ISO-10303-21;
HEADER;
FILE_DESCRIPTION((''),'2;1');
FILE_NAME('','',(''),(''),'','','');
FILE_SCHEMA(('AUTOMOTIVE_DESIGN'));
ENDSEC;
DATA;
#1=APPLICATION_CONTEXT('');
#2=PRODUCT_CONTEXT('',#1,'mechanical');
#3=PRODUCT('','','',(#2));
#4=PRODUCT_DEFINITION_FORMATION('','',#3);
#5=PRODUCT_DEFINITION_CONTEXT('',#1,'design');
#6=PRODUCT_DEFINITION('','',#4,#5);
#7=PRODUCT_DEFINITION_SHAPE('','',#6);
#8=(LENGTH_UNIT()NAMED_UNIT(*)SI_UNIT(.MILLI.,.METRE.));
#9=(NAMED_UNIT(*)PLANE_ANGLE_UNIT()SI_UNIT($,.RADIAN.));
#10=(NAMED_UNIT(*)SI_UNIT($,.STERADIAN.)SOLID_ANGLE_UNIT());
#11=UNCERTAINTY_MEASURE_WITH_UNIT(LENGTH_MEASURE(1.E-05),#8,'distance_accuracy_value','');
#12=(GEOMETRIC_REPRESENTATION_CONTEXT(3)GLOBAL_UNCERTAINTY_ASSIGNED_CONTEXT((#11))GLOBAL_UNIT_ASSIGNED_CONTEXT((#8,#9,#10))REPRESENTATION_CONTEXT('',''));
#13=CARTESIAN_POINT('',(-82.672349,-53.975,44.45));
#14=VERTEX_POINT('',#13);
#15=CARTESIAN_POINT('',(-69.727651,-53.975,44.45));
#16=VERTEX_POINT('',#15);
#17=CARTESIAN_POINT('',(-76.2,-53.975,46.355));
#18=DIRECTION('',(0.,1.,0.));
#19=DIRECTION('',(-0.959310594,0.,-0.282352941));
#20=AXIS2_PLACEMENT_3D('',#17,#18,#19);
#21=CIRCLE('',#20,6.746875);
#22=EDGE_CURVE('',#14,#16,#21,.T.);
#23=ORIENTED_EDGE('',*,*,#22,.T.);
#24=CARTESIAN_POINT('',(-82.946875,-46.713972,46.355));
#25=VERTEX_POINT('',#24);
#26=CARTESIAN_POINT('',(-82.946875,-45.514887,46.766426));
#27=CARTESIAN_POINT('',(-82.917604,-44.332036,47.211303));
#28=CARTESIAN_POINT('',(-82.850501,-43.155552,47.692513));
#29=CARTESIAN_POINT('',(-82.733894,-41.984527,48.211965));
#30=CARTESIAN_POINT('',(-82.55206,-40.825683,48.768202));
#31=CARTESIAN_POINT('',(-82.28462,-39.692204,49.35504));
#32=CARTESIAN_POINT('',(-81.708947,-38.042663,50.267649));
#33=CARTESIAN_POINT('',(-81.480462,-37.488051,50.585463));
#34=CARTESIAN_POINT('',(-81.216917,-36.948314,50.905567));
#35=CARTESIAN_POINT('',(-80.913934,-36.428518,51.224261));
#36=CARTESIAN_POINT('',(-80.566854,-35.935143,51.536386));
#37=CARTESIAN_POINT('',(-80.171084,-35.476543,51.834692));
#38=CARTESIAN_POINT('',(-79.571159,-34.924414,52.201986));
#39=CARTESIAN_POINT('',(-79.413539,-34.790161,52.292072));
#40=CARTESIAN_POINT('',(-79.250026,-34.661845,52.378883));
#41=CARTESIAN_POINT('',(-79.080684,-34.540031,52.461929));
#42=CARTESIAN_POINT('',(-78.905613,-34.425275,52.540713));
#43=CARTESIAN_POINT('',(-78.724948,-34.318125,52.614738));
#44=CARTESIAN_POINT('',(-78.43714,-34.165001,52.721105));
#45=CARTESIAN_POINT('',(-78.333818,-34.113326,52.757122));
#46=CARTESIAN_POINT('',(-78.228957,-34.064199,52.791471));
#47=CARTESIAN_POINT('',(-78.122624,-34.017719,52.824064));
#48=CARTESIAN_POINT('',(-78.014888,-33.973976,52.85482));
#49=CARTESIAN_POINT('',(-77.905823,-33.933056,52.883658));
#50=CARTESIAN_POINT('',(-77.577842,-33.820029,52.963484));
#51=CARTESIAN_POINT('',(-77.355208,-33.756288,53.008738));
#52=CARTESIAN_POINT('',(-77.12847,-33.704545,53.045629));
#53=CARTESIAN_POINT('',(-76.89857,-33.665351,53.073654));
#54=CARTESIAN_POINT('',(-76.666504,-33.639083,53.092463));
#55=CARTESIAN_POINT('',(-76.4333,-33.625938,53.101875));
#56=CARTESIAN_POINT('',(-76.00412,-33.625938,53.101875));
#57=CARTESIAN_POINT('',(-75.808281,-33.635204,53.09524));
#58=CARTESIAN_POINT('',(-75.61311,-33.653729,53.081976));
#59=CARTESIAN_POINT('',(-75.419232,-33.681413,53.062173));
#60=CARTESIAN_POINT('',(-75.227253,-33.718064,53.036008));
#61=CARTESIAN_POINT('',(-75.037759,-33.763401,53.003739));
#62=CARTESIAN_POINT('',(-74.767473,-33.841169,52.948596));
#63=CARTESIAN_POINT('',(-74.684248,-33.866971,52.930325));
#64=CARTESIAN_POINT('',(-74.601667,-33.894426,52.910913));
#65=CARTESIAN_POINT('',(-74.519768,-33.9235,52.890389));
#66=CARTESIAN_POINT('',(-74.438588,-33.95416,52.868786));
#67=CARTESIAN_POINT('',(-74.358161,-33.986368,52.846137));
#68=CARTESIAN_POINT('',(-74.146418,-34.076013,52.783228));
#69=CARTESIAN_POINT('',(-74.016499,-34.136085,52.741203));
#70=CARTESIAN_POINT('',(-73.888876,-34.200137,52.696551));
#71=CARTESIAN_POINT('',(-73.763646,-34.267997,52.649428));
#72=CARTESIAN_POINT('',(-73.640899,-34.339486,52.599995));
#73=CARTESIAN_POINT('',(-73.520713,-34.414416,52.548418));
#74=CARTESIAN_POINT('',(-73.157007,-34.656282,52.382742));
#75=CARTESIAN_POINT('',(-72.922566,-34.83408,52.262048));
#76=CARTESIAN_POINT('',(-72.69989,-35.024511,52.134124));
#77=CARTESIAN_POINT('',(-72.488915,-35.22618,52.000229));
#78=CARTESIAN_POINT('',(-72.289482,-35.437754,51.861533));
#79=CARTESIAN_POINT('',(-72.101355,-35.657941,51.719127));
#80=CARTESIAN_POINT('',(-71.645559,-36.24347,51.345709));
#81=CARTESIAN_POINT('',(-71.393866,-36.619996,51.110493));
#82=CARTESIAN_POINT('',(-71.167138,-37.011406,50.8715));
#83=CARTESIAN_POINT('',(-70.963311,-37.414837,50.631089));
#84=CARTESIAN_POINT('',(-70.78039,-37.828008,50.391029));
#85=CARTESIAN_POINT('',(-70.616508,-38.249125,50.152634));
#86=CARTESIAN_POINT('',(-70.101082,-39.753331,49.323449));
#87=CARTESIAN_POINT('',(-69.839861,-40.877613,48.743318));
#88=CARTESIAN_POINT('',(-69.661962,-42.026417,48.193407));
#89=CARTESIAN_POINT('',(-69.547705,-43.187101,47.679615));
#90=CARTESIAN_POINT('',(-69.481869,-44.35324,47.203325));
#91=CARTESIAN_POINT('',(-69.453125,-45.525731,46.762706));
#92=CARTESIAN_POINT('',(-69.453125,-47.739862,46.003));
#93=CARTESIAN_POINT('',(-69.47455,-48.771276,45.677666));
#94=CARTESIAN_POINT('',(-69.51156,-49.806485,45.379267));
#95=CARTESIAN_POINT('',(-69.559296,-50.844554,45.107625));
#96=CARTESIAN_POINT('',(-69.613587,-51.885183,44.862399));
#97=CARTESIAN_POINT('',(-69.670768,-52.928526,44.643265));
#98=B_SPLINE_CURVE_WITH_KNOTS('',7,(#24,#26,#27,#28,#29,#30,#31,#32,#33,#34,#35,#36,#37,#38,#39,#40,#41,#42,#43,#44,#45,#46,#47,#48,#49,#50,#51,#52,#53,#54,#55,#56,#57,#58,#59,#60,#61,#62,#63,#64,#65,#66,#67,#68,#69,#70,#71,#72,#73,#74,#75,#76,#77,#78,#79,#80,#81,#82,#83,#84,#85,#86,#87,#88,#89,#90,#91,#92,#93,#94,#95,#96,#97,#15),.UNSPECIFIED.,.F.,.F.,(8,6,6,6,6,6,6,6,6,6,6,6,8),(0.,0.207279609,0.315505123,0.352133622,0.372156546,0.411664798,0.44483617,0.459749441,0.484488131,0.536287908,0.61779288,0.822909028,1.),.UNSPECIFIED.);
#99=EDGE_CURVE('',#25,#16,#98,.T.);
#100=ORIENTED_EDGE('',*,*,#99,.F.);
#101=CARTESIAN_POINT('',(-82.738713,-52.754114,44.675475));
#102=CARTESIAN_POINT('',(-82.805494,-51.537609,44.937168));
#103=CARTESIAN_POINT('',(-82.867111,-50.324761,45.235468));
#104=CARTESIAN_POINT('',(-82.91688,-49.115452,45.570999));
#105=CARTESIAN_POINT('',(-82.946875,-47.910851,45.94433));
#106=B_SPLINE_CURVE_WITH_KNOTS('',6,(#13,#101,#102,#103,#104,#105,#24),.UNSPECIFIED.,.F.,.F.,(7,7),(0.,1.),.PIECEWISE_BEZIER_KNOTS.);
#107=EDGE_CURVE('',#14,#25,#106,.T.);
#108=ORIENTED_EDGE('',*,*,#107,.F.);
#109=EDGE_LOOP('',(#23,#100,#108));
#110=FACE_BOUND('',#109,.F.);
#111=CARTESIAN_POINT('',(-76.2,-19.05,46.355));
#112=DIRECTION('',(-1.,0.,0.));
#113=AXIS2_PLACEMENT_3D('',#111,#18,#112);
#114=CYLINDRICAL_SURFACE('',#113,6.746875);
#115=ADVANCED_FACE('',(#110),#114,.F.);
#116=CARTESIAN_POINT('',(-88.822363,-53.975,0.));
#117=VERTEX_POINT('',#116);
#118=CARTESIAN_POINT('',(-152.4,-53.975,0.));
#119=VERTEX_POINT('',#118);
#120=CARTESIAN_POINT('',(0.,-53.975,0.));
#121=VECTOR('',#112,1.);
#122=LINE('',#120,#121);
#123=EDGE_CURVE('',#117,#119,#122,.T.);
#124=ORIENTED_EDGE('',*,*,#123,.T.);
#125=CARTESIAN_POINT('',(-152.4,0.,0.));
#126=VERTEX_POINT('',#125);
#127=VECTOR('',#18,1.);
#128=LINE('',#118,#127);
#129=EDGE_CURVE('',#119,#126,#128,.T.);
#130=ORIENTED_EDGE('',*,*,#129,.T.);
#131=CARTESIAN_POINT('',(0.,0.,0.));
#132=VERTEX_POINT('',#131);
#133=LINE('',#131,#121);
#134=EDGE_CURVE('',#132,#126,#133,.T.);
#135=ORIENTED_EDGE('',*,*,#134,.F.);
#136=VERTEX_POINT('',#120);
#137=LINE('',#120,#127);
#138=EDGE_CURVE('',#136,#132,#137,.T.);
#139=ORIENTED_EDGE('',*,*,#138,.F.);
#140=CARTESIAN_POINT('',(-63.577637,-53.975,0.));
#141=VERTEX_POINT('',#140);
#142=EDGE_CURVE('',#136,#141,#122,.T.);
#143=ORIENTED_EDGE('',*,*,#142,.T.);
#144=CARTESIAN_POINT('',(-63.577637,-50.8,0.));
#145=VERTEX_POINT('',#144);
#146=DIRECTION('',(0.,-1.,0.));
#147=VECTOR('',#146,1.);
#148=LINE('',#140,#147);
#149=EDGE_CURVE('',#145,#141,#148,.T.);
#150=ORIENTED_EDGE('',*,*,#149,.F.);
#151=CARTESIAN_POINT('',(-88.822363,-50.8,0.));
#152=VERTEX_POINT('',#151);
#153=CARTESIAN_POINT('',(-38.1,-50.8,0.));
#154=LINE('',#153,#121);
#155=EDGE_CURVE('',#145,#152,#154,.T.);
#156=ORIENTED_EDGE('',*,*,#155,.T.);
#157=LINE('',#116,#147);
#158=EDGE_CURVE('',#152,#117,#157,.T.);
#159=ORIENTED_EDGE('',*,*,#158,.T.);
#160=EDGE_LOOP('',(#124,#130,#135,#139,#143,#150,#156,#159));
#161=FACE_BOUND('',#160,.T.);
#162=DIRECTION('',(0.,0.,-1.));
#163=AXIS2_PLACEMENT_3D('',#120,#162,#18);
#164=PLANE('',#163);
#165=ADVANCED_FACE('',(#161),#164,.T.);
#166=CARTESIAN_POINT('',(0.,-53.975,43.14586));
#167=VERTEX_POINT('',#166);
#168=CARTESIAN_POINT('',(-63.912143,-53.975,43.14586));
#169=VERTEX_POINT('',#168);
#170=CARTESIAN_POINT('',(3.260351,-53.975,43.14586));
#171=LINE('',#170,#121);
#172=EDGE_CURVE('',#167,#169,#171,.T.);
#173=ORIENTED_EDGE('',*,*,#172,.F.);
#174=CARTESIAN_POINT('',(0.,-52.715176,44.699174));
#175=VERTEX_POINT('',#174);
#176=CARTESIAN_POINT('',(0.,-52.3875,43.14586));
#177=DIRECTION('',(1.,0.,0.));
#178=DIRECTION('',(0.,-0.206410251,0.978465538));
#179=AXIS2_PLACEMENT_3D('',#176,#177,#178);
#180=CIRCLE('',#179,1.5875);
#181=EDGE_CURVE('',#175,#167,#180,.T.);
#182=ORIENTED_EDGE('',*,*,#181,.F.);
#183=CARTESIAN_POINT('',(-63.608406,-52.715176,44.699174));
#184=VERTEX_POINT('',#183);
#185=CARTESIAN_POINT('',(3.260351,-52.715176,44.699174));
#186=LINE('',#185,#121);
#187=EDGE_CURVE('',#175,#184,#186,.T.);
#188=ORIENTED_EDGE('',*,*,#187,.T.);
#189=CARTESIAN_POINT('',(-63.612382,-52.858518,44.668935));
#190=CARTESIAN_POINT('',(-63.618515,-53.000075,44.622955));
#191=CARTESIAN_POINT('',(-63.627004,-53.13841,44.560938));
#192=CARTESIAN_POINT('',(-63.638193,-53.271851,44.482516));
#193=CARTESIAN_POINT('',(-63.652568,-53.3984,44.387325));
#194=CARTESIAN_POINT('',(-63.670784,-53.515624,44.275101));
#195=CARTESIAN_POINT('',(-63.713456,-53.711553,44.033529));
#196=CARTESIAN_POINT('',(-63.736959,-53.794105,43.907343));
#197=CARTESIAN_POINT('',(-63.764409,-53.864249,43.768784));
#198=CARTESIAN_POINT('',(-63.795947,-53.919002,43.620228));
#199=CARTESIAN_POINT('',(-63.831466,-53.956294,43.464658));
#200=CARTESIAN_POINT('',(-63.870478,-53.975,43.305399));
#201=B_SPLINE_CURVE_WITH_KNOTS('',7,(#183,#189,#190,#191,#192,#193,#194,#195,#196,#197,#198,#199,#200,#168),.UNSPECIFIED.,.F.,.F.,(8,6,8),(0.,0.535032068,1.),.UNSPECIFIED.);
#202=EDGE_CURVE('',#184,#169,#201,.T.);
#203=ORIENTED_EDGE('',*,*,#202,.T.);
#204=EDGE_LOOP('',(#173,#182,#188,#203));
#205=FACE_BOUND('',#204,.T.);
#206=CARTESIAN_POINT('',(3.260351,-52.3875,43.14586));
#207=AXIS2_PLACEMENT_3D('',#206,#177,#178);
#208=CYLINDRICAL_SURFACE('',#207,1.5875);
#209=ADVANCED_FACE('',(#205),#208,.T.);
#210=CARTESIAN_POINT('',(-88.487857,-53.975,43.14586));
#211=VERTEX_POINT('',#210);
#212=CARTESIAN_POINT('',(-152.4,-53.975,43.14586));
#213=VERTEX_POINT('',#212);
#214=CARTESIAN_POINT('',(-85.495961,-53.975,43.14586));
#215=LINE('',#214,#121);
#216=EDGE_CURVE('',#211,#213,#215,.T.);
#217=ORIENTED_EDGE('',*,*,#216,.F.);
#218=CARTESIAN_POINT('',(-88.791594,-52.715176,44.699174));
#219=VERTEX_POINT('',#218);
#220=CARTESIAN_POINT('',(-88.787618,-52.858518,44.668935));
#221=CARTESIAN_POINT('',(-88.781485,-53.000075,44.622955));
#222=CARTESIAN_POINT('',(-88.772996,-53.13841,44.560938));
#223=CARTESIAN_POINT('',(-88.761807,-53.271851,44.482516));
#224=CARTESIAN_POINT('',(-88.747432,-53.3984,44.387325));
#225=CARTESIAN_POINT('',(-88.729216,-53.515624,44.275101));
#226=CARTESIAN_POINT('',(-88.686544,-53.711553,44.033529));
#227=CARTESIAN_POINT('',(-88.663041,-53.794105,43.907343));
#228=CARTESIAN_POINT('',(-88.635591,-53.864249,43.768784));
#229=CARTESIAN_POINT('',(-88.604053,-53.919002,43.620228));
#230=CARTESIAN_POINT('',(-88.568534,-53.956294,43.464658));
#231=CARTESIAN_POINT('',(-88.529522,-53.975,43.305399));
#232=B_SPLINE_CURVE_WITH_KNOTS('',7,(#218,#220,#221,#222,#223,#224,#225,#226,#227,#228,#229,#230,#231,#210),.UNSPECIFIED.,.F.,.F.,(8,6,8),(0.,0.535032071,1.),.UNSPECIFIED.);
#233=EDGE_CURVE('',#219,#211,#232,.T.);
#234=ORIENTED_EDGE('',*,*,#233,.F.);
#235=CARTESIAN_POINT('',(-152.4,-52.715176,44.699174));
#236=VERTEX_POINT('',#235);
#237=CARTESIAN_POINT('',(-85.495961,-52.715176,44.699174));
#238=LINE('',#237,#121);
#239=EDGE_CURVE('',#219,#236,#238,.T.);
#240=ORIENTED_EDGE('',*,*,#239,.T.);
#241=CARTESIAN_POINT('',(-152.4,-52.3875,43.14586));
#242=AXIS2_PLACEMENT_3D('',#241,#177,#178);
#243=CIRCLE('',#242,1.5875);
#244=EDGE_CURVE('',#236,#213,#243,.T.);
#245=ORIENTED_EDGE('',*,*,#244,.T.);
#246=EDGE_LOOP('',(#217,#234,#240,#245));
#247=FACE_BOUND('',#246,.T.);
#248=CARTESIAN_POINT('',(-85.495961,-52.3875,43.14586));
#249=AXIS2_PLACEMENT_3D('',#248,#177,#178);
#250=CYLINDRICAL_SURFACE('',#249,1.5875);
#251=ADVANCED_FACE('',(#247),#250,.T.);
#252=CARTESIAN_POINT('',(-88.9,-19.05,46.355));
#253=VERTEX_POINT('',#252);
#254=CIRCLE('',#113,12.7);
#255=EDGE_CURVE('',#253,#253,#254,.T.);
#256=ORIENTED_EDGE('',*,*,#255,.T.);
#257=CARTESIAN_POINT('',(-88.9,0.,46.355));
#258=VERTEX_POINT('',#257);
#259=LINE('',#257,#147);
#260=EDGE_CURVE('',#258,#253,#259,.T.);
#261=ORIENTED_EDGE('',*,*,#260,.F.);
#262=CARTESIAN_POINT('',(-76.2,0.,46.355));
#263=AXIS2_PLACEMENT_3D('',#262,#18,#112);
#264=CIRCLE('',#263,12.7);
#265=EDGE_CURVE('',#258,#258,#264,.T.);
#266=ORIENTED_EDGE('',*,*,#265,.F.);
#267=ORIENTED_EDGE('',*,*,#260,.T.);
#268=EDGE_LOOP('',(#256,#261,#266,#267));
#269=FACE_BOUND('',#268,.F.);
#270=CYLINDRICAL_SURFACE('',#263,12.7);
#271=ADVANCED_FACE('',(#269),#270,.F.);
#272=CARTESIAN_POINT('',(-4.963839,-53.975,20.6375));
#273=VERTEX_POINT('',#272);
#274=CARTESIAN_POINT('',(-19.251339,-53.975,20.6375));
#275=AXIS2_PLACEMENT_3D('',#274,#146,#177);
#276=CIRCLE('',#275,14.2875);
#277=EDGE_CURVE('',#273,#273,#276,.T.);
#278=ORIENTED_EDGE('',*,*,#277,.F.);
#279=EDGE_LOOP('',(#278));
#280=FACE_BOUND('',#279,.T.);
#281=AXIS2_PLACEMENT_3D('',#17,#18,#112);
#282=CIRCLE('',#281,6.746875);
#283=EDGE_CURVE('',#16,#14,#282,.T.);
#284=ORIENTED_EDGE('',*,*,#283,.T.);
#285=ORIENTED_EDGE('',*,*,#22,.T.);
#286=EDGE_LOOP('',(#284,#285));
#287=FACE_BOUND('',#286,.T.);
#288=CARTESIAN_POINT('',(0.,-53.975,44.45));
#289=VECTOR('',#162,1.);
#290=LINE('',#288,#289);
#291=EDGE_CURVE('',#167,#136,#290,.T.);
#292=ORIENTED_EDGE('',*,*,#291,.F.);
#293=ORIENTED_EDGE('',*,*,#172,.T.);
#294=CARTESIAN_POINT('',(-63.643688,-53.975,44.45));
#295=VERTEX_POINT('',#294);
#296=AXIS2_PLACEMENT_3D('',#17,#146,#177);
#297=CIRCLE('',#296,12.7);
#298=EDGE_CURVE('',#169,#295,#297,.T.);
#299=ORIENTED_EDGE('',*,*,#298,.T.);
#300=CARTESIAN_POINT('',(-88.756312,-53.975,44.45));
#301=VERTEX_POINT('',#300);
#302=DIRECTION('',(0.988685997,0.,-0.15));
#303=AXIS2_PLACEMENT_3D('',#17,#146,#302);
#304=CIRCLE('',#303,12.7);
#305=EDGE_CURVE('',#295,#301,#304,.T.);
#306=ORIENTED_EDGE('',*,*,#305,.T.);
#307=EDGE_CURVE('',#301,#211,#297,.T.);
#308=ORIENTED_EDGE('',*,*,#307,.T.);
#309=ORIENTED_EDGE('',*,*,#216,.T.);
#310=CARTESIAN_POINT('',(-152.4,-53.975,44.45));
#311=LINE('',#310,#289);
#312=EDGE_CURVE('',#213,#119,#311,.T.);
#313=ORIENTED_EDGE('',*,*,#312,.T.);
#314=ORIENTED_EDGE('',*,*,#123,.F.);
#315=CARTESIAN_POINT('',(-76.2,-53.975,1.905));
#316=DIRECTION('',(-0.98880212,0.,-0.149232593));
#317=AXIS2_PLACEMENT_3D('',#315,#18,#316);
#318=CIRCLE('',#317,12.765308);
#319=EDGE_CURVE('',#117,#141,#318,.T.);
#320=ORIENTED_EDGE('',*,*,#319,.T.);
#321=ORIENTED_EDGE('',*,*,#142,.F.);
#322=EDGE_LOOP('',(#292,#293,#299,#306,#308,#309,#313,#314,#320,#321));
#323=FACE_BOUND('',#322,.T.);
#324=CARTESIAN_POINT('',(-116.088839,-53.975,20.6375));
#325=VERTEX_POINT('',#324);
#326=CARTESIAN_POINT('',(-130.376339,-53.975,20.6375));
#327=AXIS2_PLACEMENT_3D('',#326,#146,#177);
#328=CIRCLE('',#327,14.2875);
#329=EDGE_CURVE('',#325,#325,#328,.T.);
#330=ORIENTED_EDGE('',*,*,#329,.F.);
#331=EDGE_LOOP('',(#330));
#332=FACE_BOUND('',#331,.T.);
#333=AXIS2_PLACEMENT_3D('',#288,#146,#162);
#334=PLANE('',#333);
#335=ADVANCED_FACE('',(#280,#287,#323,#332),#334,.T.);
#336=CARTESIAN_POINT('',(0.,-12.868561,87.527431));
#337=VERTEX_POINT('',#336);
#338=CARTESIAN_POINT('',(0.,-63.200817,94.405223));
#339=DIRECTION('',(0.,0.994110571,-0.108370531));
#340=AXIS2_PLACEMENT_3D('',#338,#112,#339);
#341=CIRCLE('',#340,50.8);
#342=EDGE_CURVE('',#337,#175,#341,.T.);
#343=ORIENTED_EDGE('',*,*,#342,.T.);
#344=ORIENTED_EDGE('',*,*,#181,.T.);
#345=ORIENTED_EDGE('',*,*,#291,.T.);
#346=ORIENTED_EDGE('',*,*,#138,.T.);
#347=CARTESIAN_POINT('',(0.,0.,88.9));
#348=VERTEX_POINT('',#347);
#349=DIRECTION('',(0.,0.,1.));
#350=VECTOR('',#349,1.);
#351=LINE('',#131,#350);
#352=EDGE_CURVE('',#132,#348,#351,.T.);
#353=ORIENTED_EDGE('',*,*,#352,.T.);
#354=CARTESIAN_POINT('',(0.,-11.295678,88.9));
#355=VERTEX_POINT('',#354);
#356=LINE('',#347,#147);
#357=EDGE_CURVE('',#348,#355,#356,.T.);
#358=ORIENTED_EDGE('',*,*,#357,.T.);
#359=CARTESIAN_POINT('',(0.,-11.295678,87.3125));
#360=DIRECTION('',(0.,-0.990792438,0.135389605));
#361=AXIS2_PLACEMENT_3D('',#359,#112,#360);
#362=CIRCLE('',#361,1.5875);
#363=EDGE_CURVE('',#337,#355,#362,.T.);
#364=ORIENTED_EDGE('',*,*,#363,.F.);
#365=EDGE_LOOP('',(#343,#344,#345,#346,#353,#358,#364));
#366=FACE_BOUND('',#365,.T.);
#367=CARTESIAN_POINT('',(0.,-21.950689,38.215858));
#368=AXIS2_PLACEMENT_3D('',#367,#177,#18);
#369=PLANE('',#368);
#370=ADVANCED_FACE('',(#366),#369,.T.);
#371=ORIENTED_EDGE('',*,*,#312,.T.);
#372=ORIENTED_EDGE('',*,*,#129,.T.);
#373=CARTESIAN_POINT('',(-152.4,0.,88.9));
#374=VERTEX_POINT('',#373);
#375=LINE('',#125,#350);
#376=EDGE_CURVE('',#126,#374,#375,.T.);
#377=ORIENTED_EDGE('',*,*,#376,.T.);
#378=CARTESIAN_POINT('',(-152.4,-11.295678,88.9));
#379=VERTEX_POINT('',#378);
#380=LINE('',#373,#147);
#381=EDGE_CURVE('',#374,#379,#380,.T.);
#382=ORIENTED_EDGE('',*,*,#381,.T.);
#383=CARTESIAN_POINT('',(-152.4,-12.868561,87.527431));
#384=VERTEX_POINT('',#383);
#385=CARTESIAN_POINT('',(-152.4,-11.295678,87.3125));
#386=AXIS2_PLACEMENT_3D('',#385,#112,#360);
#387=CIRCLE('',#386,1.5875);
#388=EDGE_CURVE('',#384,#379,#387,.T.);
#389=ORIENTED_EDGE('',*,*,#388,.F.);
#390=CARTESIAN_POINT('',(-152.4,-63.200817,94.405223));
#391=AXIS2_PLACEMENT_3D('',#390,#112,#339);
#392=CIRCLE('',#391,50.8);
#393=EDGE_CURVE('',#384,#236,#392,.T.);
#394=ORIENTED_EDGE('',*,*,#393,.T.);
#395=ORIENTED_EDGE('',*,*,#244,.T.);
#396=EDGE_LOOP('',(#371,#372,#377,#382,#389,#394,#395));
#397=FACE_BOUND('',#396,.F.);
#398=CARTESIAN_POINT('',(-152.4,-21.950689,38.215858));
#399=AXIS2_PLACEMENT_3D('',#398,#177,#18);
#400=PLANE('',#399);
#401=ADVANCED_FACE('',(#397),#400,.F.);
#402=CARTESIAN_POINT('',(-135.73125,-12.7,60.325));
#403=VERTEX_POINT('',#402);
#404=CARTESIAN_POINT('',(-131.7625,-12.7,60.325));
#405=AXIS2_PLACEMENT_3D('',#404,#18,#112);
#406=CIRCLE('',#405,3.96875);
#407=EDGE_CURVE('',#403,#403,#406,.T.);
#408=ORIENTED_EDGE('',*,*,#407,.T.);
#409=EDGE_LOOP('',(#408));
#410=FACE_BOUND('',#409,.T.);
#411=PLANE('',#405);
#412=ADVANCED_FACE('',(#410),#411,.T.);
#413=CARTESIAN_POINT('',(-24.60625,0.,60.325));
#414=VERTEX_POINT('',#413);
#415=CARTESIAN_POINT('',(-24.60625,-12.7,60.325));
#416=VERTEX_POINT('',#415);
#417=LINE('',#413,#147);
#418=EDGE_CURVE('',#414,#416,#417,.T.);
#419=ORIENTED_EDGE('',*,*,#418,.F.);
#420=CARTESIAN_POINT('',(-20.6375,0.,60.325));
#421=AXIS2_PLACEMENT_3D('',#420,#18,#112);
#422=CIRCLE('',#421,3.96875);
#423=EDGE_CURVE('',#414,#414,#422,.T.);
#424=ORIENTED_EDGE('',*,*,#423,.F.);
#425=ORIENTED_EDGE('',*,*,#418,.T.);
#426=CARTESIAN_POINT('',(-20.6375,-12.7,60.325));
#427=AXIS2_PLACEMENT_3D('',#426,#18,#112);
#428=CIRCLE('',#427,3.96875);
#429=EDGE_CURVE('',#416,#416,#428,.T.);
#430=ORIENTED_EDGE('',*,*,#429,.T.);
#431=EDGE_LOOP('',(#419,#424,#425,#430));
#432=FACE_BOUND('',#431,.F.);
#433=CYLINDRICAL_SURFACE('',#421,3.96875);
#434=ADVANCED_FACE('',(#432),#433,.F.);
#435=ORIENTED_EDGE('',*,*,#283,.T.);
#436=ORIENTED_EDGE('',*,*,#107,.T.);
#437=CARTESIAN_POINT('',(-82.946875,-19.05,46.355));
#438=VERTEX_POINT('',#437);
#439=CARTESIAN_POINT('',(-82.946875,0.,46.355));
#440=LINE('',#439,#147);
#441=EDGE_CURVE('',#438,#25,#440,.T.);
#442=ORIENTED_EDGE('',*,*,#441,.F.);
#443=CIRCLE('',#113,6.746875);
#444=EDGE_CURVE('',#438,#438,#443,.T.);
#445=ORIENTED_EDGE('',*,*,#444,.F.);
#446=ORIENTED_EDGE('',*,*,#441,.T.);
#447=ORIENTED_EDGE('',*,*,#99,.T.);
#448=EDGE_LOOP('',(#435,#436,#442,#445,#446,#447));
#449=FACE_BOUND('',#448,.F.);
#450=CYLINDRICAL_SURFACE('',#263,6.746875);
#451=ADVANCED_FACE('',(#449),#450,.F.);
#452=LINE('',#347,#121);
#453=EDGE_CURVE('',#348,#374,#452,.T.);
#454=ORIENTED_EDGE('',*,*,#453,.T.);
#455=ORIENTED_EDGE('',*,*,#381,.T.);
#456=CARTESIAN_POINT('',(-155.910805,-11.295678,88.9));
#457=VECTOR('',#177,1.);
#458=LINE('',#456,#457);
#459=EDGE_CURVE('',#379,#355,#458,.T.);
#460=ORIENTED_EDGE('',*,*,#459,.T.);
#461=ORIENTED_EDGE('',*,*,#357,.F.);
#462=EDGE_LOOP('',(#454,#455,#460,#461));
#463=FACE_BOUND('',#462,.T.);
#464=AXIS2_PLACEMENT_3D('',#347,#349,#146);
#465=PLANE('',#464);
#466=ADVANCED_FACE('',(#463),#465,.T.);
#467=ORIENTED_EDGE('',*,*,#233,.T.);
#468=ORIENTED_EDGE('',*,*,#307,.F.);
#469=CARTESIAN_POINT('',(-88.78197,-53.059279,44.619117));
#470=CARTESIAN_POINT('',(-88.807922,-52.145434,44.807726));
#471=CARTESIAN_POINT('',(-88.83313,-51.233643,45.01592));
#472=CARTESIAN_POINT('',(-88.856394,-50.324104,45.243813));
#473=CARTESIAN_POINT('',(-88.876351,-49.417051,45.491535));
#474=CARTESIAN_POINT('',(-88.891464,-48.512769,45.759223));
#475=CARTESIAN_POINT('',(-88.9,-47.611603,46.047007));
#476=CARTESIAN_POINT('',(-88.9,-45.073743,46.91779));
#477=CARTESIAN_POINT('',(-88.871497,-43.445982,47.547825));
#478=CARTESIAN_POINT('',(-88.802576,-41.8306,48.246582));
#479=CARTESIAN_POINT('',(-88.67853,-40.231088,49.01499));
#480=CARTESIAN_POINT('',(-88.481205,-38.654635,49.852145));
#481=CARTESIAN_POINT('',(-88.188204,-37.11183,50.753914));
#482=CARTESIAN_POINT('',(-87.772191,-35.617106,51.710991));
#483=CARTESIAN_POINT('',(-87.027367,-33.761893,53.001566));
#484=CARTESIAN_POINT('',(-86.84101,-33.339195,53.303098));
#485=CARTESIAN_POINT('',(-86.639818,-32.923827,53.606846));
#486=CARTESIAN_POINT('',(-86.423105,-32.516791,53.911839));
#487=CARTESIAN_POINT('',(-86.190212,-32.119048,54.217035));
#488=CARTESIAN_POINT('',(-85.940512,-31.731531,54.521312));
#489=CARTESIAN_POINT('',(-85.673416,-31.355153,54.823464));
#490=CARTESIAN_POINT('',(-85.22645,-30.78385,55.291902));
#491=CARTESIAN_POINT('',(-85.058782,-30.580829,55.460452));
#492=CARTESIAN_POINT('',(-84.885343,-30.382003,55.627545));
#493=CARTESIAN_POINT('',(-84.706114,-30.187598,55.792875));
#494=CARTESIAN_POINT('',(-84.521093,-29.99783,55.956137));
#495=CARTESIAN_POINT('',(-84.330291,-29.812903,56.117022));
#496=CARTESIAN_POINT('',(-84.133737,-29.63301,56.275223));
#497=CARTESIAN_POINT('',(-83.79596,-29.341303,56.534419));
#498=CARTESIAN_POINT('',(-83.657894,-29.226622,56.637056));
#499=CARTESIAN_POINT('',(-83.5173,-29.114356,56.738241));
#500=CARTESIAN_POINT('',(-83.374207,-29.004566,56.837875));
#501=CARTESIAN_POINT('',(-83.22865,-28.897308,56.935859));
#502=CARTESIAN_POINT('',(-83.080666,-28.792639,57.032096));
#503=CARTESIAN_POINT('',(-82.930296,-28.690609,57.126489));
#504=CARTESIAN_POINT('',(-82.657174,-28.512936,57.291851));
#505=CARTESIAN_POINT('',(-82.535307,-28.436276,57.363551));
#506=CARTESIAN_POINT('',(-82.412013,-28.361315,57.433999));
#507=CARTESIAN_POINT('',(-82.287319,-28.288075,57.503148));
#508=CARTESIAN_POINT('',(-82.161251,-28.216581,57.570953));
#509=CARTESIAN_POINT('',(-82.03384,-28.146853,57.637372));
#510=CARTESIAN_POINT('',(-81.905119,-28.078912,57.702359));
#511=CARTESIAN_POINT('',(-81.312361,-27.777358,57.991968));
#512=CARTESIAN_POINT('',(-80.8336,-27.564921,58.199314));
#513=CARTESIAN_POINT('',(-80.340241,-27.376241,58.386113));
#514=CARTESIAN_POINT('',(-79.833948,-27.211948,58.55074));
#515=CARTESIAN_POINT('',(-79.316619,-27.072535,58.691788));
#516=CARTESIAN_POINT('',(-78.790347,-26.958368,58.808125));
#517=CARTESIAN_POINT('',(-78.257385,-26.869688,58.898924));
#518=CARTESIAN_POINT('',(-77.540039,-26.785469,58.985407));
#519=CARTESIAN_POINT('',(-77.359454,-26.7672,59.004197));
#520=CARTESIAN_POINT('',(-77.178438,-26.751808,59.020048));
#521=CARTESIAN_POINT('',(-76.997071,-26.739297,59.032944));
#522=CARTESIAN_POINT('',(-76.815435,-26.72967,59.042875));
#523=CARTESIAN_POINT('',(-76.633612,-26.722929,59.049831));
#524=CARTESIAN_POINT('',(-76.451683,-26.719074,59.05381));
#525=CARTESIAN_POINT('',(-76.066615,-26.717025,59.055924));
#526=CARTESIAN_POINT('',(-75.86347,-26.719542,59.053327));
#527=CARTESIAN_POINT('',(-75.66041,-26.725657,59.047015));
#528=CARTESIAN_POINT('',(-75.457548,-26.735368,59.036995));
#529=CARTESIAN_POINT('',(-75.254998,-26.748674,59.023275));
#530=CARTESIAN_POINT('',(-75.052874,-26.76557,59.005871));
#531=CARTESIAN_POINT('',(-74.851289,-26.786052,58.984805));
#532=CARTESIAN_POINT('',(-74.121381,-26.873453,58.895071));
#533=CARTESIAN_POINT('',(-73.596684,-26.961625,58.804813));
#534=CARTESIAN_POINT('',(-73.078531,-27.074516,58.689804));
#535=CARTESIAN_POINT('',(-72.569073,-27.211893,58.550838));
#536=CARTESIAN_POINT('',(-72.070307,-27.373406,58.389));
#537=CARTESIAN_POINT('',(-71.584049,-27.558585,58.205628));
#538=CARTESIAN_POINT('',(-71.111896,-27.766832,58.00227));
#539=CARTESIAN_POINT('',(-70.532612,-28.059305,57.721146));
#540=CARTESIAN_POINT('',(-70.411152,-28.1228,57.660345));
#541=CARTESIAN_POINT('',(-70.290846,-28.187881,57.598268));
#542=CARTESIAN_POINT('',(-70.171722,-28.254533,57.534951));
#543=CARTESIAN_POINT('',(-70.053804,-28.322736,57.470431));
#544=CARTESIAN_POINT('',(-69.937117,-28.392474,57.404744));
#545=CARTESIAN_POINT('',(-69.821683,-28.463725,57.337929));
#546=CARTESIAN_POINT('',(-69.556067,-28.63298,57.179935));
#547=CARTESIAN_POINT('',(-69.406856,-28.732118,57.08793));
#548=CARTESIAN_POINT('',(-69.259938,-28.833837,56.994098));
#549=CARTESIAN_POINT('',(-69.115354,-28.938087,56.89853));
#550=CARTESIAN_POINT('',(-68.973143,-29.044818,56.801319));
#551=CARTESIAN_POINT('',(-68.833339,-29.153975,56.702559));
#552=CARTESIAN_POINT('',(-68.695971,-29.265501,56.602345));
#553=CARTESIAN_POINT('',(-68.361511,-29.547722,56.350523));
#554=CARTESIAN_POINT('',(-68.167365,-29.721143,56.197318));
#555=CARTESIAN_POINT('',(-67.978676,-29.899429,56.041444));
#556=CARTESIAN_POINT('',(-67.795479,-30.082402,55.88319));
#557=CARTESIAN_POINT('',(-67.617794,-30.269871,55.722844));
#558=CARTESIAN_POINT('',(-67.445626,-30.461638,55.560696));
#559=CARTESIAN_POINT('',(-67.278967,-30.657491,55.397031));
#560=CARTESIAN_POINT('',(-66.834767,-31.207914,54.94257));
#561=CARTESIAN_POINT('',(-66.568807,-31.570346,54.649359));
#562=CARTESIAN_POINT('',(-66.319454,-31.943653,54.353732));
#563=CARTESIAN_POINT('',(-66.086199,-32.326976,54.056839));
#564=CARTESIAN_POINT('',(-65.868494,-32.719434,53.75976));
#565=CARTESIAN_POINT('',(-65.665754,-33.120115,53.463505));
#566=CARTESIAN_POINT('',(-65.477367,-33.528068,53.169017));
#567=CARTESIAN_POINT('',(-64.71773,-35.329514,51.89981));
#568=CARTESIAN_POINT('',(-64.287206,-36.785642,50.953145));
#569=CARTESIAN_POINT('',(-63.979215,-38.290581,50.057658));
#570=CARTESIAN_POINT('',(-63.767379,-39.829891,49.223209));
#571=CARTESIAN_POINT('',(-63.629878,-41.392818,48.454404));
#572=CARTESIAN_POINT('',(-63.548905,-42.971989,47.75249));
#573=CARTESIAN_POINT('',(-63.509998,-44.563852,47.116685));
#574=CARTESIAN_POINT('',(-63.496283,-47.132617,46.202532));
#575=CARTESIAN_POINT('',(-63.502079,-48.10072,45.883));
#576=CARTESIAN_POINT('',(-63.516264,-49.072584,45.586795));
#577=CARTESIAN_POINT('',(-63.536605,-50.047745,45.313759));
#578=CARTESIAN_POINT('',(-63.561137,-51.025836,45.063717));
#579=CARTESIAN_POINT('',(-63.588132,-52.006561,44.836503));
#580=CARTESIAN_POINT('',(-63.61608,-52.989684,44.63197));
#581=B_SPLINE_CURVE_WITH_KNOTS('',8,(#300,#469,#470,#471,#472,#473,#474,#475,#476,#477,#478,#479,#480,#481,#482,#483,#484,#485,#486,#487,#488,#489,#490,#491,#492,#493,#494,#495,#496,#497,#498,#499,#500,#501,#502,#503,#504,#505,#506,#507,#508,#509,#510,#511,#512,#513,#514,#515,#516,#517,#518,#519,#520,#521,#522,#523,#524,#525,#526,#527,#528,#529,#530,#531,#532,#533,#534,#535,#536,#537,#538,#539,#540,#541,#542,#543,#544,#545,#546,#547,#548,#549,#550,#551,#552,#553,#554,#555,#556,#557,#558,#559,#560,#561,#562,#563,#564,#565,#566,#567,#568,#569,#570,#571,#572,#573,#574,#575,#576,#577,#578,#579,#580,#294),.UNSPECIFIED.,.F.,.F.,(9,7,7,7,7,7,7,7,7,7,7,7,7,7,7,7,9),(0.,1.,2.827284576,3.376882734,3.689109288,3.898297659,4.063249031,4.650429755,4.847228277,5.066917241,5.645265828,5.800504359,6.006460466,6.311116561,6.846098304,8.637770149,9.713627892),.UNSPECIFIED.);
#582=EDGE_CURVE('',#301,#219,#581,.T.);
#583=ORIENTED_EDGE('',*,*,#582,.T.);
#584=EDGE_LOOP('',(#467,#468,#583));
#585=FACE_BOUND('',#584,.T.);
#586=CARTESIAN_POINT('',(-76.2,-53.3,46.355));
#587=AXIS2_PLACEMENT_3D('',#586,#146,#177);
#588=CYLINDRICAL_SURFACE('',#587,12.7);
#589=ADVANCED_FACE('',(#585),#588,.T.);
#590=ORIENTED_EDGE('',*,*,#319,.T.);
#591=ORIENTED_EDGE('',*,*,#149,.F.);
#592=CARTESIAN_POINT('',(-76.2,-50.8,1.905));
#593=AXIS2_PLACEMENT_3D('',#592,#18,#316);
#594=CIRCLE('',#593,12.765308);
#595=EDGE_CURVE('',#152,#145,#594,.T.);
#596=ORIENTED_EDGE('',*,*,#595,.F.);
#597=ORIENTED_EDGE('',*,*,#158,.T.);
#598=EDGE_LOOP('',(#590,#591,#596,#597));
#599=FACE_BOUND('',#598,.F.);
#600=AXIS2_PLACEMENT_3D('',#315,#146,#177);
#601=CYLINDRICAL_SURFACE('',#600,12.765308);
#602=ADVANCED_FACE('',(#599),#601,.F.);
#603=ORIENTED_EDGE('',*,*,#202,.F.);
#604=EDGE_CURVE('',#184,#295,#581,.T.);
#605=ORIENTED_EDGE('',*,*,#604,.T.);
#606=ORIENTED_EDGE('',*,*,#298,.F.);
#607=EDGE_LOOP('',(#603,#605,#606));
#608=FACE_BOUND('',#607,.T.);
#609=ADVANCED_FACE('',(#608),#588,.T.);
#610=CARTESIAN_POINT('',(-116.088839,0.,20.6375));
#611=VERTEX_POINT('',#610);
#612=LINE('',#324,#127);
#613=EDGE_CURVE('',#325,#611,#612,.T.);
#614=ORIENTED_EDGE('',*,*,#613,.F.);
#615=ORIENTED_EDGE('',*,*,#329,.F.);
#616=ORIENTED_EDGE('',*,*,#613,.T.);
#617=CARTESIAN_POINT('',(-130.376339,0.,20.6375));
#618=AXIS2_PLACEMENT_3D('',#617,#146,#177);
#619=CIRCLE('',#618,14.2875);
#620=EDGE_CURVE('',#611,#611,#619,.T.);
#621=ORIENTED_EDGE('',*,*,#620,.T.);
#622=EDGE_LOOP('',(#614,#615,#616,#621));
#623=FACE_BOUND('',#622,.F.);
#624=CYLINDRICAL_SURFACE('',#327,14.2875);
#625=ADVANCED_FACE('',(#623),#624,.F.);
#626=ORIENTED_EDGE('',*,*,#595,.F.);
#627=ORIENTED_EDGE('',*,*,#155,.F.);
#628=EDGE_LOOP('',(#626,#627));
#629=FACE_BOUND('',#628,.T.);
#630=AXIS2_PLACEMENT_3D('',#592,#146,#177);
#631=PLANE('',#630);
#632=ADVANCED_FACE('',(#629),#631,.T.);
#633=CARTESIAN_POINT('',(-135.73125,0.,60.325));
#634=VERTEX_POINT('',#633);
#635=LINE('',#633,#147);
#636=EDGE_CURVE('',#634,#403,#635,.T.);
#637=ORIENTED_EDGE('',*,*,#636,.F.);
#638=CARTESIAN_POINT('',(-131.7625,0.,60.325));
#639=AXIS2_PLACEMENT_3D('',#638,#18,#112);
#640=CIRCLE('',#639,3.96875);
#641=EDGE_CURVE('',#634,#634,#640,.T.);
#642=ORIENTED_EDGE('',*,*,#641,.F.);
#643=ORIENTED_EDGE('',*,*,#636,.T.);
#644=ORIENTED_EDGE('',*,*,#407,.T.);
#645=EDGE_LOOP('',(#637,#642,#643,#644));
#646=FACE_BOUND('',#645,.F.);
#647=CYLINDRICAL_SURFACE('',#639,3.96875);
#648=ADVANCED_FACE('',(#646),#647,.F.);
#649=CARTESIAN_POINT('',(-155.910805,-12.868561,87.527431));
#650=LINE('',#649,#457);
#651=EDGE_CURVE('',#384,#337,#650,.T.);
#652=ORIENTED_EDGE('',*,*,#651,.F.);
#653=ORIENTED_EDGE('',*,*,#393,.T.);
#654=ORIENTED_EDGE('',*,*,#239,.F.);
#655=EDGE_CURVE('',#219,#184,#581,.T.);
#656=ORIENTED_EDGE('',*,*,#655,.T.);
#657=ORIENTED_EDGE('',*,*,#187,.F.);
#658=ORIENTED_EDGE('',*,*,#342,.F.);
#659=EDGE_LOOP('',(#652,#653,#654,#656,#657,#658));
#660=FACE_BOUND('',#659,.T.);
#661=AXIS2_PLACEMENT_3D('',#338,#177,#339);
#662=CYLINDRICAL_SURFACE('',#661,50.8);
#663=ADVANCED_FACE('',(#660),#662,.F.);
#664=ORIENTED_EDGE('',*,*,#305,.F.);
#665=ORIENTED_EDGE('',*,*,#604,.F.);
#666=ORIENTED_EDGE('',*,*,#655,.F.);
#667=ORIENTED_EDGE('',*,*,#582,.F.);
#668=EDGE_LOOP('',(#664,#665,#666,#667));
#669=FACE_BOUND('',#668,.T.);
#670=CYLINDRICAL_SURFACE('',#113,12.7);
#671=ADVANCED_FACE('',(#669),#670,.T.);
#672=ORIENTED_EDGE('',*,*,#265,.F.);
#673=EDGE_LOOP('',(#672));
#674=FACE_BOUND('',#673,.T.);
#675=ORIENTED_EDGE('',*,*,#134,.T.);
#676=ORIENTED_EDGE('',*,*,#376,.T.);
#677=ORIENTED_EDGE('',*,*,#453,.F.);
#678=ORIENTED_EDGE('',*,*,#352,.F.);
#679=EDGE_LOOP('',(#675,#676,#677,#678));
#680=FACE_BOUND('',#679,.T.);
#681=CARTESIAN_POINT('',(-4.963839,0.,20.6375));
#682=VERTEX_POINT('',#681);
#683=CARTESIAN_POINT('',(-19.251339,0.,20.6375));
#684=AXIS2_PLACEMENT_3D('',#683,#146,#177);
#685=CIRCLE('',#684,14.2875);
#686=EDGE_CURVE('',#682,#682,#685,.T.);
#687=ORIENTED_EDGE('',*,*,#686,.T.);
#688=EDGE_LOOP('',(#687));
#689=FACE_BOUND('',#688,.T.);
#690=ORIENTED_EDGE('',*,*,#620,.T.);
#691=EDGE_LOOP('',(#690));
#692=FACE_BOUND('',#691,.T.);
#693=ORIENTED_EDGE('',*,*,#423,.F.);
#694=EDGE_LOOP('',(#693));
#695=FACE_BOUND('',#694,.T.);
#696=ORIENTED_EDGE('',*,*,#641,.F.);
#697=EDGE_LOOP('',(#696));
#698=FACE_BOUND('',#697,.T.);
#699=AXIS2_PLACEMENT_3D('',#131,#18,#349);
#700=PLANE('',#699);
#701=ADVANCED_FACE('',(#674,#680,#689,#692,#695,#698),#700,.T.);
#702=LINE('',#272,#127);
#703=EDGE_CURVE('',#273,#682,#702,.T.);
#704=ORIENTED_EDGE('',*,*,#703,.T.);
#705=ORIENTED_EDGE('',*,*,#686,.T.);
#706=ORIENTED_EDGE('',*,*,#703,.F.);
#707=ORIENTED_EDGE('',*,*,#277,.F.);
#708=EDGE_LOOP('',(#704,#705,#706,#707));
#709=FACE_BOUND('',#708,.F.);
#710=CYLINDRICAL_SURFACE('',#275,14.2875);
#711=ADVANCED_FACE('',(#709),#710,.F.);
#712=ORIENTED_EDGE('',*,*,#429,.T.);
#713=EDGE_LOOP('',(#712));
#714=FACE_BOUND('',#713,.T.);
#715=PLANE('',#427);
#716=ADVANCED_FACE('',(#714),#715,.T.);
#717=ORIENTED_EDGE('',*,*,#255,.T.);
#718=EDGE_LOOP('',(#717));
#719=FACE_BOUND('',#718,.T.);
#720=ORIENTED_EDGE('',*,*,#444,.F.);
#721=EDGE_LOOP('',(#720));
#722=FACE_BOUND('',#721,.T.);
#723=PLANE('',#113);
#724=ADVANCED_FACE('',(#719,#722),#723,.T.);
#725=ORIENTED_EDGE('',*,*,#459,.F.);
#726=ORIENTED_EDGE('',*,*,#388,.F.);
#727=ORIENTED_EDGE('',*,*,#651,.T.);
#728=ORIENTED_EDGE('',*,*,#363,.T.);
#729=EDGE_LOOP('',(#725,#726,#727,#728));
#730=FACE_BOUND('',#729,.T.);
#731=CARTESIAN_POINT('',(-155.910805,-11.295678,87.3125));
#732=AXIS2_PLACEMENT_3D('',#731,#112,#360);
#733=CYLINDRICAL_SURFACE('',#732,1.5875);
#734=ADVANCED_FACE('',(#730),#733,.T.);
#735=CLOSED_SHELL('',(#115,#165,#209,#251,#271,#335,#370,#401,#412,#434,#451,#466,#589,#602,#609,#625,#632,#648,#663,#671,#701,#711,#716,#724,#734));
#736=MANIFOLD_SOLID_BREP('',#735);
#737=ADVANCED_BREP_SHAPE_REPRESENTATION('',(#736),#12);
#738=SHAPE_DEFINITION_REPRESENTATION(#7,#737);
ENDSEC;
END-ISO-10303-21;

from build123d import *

# Parameters (mm, degrees)
F1_DEPTH      = 152.4
F2_R          = 14.2875
F3_DEPTH      = 101.6
F4_R          = 12.7
F4_R_2        = 6.746875
F5_DEPTH      = 19.05
F6_DEPTH      = 76.2
F7_DEPTH      = 34.925
F8_R          = 12.7653078778
F9_DEPTH      = 3.175
F10_T1_DEPTH  = 159.4216090421
F10_T6_DEPTH  = 70.1643898363
F10_S7_R      = 12.7
F10_T8_DEPTH  = 37
F10_T12_DEPTH = 70.1643898363
F10_S13_R     = 12.7
F10_T14_DEPTH = 37
F11_R         = 3.96875
F12_DEPTH     = 12.7


# Not quite as in the source:
# - a fillet or chamfer that OpenCascade refuses, or shapes differently, is made with other operations: its cross-section is extruded or revolved along the edge and cut away or added
# - a length typed as a fraction of an inch, garbled in the dataset ("3 / 203.2 mm" for 3/8 in), is restored


with BuildPart() as f1:
    # F0 (on Right) → F1 (new body)
    with BuildSketch(Plane.YZ):
        with BuildLine():
            Line((-53.975, 44.45), (-53.975, 0))
            Line((-53.975, 0), (0, 0))
            Line((0, 0), (0, 88.9))
            Line((0, 88.9), (-12.7, 88.9))
            ThreePointArc((-12.7, 88.9), (-25.9749076509, 59.8383071044), (-53.975, 44.45))
        make_face()
    extrude(amount=-F1_DEPTH)

    # F2 (on face) → F3 (cut)
    with BuildSketch(Plane.XZ.offset(53.975)):
        with Locations((-130.3763389587, 20.6375)):
            Circle(F2_R)
        with Locations((-19.2513389587, 20.6375)):
            Circle(F2_R)
    extrude(amount=-F3_DEPTH, mode=Mode.SUBTRACT)

    # F4 (on face) → F5 (cut)
    with BuildSketch(Plane(origin=(0, 0, 0), x_dir=(-1, 0, 0), z_dir=(0, 1, 0))):
        with Locations((76.2, 46.355)):
            Circle(F4_R)
        with Locations((76.2, 46.355)):
            Circle(F4_R_2, mode=Mode.SUBTRACT)
    extrude(amount=-F5_DEPTH, mode=Mode.SUBTRACT)

    # F6 (cut): a face of the model
    f6_faces = [f1.faces().sort_by_distance(p)[0] for p in [
        (-76.2, 0, 46.355),
    ]]
    extrude(f6_faces, amount=-F6_DEPTH, mode=Mode.SUBTRACT)

    # F7 (add, through all): a face of the model
    f7_faces = [f1.faces().sort_by_distance(p)[0] for p in [
        (-63.8592102448, -19.05, 46.355),
    ]]
    extrude(f7_faces, amount=-F7_DEPTH)

    # F8 (on face) → F9 (cut)
    with BuildSketch(Plane.XZ.offset(53.975)):
        with Locations((-76.2, 1.905)):
            Circle(F8_R)
    extrude(amount=-F9_DEPTH, mode=Mode.SUBTRACT)

    # F10: fillet of radius 1.5875 on 3 edges, made by hand

    # F10_s2 → F10_t1 (cut)
    with BuildSketch(Plane.YZ.offset(-155.9108045211)):
        with BuildLine():
            ThreePointArc((-12.8685611865, 87.5274309986), (-12.3394581707, 88.5086101977), (-11.2956781916, 88.9))
            Line((-11.2956781916, 88.9), (-12.7, 88.9))
            ThreePointArc((-12.7, 88.9), (-12.7796098579, 88.2131418999), (-12.8685611865, 87.5274309986))
        make_face()
    extrude(amount=F10_T1_DEPTH, mode=Mode.SUBTRACT)


with BuildPart() as f10_tool4:
    # F10_s5 → F10_t6 (new body)
    with BuildSketch(Plane.YZ.offset(-85.4959611607)):
        with BuildLine():
            ThreePointArc((-52.7151762735, 44.6991736422), (-53.6204522161, 44.1458521426), (-53.975, 43.1458596012))
            Line((-53.975, 43.1458596012), (-53.975, 44.45))
            ThreePointArc((-53.975, 44.45), (-53.3443007137, 44.5706056045), (-52.7151762735, 44.6991736422))
        make_face()
    extrude(amount=-F10_T6_DEPTH)

    # F10_s7 → F10_t8 (cut, symmetric)
    with BuildSketch(Plane.XZ.offset(53.3)):
        with Locations((-76.2, 46.355)):
            Circle(F10_S7_R)
    extrude(amount=F10_T8_DEPTH, both=True, mode=Mode.SUBTRACT)


with BuildPart() as f1_1:
    add(f1.part)

    # F10_t3: cut F10_tool4
    add(f10_tool4.part, mode=Mode.SUBTRACT)


with BuildPart() as f10_tool10:
    # F10_s11 → F10_t12 (new body)
    with BuildSketch(Plane.YZ.offset(3.2603509969)):
        with BuildLine():
            ThreePointArc((-52.7151762735, 44.6991736422), (-53.6204522161, 44.1458521426), (-53.975, 43.1458596012))
            Line((-53.975, 43.1458596012), (-53.975, 44.45))
            ThreePointArc((-53.975, 44.45), (-53.3443007137, 44.5706056045), (-52.7151762735, 44.6991736422))
        make_face()
    extrude(amount=-F10_T12_DEPTH)

    # F10_s13 → F10_t14 (cut, symmetric)
    with BuildSketch(Plane.XZ.offset(53.3)):
        with Locations((-76.2, 46.355)):
            Circle(F10_S13_R)
    extrude(amount=F10_T14_DEPTH, both=True, mode=Mode.SUBTRACT)


with BuildPart() as f1_2:
    add(f1_1.part)

    # F10_t9: cut F10_tool10
    add(f10_tool10.part, mode=Mode.SUBTRACT)

    # F11 (on face) → F12 (cut)
    with BuildSketch(Plane(origin=(0, 0, 0), x_dir=(-1, 0, 0), z_dir=(0, 1, 0))):
        with Locations((20.6375, 60.325)):
            Circle(F11_R)
        with Locations((131.7625, 60.325)):
            Circle(F11_R)
    extrude(amount=-F12_DEPTH, mode=Mode.SUBTRACT)


solid = f1_2.part
